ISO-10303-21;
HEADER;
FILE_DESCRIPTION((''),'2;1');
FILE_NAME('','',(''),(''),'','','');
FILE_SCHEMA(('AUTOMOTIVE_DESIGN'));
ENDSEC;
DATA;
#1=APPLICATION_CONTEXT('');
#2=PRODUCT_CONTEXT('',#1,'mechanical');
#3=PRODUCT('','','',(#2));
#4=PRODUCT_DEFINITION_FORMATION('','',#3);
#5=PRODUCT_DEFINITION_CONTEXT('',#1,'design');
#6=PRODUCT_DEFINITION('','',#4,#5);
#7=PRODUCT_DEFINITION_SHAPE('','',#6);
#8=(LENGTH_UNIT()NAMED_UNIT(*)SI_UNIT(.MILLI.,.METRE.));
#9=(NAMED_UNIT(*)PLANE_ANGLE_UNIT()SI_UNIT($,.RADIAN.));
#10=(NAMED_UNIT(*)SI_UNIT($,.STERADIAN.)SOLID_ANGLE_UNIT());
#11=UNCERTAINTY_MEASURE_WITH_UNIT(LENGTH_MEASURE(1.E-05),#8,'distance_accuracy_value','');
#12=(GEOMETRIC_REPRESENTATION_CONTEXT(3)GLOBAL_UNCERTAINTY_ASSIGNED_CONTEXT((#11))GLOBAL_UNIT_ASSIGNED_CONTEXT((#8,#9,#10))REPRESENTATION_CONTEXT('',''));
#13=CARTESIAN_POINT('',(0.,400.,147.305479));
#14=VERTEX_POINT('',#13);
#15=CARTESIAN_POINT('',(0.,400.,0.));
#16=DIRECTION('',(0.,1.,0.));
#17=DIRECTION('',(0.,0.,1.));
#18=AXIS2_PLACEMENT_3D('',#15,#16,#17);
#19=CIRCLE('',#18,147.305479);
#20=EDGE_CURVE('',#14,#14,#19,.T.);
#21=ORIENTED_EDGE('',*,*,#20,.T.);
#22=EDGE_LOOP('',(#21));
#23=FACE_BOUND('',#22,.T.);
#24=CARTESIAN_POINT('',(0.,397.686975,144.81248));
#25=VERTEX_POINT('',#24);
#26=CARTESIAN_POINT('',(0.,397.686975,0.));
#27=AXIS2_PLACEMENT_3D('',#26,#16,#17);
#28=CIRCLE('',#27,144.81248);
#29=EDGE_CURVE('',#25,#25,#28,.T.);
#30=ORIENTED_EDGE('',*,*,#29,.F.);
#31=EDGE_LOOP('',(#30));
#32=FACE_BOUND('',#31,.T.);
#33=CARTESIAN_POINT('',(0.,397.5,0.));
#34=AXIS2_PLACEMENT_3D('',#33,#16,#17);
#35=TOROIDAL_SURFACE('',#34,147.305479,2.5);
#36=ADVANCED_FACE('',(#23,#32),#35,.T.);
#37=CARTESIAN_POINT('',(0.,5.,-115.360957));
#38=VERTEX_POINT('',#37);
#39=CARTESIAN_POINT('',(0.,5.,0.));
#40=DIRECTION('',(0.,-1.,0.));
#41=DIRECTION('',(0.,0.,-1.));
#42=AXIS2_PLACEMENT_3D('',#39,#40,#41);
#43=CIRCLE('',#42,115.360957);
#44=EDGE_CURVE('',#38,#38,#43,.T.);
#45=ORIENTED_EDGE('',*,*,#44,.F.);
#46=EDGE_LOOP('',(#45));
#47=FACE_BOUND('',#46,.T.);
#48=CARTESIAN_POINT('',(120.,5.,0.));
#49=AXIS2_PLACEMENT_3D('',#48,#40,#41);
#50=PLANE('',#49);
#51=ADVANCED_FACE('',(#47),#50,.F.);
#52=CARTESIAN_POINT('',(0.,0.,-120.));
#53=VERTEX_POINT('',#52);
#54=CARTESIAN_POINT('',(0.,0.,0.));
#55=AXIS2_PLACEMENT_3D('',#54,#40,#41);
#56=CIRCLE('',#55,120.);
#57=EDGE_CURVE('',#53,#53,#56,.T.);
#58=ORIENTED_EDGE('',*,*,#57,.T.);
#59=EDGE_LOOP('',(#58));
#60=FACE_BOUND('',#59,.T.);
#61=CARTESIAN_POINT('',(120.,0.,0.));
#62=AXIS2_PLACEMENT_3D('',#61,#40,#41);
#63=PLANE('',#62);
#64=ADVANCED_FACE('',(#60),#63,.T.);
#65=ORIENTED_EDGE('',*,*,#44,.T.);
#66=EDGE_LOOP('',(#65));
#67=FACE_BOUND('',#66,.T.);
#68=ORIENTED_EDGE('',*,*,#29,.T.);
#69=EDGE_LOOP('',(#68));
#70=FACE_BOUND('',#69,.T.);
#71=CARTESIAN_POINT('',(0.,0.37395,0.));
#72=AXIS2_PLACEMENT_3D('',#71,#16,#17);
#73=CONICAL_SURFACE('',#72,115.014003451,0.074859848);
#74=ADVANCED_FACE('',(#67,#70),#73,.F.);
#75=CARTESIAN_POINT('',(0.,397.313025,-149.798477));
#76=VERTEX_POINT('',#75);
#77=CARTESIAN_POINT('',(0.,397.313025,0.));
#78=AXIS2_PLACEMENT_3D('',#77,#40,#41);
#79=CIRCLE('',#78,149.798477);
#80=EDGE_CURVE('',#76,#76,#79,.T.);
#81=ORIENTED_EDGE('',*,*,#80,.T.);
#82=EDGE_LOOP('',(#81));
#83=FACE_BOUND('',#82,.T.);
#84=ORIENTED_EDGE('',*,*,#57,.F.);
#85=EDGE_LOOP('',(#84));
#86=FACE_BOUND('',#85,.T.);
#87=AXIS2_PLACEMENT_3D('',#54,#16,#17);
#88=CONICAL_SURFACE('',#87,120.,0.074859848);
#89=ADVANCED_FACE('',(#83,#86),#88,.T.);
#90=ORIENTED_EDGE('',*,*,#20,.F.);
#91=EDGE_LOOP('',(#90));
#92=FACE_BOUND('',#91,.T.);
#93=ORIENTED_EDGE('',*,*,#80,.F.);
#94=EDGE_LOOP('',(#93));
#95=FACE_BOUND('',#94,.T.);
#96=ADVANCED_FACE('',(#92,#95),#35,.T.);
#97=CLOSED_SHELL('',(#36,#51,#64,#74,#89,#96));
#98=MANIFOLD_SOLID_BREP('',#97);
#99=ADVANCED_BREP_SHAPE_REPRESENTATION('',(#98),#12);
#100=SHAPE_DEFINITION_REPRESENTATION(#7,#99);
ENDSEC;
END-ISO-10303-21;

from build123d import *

# Parameters (mm, degrees)
VACIADO1_T  = -5
REDONDEO2_R = 2.5


with BuildPart() as part:
    # Croquis1 → Revolución1 (revolve)
    with BuildSketch(Plane.XY, mode=Mode.PRIVATE) as revoluci_n1_sk:
        Polygon((0, 400), (150, 400), (120, 0), (0, 0), align=None)
    revolve(revoluci_n1_sk.sketch.rotate(Axis((0, 0, 0), (0, 1, 0)), 90), axis=Axis((0, 0, 0), (0, 1, 0)))

    # Vaciado1
    vaciado1_openings = [part.faces().sort_by_distance(p)[0] for p in [
        (0, 400, 0),
    ]]
    offset(amount=VACIADO1_T, openings=vaciado1_openings, kind=Kind.INTERSECTION)

    # Redondeo2
    redondeo2_edges = [part.edges().sort_by_distance(p)[0] for p in [
        (0, 400, 150),
        (0, 400, 144.98595722),
    ]]
    fillet(redondeo2_edges, radius=REDONDEO2_R - 0.0001)  # a hair under: the kernel refuses the full size


solid = part.part
